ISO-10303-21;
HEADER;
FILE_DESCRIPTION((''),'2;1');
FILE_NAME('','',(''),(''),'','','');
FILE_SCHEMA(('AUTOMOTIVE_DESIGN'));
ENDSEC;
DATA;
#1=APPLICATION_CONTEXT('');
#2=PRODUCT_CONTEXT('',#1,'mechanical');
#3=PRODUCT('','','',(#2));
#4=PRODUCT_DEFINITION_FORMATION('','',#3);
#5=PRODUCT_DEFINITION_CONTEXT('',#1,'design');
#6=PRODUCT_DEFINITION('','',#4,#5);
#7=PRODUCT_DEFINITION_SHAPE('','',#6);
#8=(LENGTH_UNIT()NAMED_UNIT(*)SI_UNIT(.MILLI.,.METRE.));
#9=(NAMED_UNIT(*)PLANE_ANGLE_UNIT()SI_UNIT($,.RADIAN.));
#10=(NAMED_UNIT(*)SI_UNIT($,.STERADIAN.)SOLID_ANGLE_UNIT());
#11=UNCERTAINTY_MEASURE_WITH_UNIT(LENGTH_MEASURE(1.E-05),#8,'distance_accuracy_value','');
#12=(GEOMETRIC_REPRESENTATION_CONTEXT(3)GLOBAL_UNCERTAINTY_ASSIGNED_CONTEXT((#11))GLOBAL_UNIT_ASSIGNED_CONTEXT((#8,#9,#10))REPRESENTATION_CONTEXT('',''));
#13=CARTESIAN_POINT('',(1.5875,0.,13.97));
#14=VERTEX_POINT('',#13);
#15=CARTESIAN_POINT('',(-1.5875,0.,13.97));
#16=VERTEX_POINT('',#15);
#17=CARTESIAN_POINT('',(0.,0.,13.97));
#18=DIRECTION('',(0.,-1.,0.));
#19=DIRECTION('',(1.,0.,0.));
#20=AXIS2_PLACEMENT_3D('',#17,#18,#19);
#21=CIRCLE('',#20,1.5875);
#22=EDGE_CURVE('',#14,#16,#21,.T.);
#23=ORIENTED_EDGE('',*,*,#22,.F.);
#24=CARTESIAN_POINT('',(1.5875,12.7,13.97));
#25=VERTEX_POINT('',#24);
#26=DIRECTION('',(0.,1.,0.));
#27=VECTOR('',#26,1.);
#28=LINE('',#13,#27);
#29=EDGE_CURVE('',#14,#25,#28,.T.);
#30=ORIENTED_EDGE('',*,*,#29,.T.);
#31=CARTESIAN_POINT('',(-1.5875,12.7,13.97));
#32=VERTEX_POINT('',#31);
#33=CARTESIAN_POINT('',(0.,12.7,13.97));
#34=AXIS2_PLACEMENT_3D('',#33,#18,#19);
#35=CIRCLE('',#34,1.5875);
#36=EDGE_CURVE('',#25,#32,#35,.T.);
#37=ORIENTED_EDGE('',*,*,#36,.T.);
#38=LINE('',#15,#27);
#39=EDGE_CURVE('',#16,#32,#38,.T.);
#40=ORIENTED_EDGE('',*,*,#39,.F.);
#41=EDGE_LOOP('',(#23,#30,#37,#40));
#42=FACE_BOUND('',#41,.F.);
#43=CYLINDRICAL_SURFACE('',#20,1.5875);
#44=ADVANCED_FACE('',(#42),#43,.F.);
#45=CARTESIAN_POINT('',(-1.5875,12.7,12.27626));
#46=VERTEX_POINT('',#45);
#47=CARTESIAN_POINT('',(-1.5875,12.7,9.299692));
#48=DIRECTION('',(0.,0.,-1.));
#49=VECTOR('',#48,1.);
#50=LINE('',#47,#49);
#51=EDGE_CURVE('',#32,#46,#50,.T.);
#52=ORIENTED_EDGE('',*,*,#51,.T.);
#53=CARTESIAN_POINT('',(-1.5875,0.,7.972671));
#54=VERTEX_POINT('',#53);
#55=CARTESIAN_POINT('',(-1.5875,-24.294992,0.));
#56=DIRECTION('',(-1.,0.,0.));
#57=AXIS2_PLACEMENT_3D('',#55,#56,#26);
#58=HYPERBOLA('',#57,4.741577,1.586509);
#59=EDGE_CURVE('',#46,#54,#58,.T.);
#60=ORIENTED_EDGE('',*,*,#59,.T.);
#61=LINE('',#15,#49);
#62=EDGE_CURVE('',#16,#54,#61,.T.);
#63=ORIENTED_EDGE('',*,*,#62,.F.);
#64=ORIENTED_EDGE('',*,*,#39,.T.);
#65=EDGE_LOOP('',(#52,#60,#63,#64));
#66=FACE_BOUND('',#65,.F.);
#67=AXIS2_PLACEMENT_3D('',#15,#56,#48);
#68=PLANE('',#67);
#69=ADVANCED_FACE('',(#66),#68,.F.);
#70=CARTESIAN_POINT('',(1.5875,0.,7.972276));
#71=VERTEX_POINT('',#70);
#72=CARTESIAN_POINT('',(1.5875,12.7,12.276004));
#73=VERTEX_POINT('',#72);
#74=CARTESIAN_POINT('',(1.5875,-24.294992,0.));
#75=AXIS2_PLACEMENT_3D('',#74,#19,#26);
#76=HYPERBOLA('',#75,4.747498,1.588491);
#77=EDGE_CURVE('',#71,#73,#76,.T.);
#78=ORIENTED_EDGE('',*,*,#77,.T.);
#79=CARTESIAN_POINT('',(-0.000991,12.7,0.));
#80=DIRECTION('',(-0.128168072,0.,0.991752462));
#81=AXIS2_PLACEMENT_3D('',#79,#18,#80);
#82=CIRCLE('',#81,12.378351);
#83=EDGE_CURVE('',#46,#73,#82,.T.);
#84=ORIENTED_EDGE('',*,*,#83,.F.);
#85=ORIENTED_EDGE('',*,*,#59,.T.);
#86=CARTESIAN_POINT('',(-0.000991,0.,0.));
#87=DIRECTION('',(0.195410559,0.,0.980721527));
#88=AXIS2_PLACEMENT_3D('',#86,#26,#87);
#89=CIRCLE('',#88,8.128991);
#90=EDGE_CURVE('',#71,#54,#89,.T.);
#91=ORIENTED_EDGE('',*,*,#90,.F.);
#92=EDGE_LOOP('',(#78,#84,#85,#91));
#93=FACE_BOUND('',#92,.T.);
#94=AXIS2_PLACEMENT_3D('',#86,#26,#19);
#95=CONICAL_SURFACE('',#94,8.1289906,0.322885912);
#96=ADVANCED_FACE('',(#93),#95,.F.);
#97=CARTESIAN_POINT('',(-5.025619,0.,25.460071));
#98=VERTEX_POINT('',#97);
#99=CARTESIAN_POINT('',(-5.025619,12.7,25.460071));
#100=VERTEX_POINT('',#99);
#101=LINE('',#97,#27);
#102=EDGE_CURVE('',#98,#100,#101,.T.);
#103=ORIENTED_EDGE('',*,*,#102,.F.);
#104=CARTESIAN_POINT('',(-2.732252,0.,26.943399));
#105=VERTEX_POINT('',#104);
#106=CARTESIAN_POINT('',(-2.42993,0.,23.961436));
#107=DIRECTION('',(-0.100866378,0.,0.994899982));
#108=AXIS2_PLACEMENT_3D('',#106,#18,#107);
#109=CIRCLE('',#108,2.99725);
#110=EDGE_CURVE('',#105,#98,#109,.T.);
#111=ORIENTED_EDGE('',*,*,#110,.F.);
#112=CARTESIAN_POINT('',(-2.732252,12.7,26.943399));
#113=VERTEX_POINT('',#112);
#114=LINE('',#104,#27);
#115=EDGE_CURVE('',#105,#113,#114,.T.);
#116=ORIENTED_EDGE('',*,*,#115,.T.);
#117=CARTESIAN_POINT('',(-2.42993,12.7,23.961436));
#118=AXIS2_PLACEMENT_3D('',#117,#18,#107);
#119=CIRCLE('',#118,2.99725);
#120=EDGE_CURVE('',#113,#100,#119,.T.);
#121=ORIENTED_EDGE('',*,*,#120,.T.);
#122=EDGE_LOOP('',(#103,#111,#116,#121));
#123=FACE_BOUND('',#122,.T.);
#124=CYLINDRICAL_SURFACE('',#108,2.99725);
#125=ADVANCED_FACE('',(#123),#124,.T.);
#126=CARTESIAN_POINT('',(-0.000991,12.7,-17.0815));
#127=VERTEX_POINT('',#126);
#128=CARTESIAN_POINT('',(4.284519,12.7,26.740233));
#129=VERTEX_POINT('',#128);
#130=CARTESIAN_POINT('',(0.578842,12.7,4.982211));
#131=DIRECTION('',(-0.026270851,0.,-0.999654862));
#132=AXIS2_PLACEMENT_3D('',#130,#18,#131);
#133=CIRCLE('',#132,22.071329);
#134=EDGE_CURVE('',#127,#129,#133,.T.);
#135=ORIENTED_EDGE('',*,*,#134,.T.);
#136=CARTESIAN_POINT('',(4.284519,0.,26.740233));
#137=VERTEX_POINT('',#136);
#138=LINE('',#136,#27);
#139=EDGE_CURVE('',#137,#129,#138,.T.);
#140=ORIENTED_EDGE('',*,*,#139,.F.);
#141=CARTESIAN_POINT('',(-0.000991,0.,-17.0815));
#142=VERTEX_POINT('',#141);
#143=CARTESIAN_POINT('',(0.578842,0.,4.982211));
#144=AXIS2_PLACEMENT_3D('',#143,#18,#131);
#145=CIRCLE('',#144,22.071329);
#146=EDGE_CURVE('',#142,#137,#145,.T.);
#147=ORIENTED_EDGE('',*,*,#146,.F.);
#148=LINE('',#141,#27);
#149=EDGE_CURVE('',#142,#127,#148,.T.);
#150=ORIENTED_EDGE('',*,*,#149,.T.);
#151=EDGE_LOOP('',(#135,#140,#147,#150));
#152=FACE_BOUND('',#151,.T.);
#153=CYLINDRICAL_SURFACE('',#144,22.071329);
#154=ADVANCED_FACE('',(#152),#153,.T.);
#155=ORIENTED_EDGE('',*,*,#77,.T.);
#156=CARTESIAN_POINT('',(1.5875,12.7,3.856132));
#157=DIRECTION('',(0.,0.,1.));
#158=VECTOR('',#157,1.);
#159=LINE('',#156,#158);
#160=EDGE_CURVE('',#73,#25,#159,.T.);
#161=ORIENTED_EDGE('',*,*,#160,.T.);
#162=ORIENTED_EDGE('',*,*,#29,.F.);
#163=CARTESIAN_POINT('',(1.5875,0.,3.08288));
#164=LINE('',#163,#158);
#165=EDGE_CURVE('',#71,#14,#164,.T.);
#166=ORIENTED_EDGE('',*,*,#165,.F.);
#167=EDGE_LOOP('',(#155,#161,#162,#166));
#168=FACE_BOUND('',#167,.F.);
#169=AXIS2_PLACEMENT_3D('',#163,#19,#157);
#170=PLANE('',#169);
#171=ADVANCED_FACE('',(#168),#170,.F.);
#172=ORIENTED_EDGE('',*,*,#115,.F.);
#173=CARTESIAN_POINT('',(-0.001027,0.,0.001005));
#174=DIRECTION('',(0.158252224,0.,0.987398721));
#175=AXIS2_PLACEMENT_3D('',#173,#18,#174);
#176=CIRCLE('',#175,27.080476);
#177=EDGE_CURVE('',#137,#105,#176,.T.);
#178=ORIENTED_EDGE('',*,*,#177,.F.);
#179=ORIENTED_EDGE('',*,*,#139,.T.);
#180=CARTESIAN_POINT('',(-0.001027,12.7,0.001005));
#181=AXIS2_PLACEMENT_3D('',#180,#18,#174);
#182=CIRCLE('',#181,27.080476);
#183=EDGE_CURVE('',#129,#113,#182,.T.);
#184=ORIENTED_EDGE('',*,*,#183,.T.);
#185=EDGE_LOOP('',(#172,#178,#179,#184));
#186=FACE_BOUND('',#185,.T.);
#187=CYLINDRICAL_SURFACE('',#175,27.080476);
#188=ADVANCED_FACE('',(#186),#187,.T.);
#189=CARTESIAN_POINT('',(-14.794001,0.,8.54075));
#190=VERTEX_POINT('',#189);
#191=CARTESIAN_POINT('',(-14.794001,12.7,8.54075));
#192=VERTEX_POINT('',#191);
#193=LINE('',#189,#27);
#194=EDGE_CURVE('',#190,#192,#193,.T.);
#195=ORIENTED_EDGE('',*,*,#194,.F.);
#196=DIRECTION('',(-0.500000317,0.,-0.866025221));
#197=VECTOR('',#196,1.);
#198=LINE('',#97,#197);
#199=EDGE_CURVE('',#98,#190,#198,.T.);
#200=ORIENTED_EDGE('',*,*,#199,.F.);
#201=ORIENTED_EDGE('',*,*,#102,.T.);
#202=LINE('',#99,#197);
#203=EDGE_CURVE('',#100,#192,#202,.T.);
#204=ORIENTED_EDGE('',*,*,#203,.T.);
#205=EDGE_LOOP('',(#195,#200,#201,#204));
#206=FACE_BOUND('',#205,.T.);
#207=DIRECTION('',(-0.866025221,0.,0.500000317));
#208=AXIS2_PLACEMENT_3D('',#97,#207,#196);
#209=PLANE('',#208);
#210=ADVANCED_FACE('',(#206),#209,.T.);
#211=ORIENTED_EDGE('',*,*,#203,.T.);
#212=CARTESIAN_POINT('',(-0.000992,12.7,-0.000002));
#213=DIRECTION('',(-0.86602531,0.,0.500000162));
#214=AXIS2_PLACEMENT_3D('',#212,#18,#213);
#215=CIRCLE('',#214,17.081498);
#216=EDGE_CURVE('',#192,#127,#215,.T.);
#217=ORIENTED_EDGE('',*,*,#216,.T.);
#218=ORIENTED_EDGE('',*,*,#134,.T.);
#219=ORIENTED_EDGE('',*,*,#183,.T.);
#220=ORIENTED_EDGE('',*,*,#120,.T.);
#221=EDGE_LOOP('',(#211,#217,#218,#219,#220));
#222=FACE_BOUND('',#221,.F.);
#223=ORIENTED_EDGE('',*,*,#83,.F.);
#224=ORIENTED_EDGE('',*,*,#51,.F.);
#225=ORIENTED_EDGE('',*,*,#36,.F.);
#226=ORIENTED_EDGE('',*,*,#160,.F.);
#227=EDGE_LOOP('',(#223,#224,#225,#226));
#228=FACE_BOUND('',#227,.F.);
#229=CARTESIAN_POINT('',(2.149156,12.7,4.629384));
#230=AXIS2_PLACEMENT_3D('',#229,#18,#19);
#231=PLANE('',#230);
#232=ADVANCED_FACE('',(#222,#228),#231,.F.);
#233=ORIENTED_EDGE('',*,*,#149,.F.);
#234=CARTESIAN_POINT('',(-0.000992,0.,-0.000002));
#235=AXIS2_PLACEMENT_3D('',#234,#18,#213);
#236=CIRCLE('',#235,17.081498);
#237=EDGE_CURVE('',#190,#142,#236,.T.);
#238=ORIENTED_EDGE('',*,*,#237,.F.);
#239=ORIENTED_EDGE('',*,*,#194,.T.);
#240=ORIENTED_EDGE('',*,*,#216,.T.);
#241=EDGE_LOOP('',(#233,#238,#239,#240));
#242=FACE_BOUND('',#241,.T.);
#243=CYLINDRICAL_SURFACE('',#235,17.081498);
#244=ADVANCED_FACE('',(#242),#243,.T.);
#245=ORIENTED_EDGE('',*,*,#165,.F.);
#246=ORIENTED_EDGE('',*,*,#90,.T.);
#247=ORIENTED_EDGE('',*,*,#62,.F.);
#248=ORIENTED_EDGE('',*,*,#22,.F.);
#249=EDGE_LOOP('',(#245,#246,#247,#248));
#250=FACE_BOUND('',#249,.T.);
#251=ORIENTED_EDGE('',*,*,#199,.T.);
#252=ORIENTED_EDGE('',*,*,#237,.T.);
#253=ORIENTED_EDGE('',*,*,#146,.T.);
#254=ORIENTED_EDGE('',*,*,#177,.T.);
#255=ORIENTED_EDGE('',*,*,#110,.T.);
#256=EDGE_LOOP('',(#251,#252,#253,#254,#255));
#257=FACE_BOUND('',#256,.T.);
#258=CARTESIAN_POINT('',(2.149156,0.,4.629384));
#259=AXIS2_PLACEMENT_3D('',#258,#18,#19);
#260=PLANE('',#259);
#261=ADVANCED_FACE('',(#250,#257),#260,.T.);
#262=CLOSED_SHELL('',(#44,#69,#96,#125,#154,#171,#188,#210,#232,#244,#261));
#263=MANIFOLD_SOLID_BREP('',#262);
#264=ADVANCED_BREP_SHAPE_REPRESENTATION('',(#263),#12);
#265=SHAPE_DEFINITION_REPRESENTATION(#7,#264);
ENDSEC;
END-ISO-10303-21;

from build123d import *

# Parameters (mm, degrees)
F0_R     = 8.128
F1_DEPTH = 12.7
F5_DEPTH = 12.701


# Not quite as in the source:
# - ends of sketch curves that miss each other by under 0.0002 mm in the source are joined


with BuildPart() as f1:
    # F0 (on Front) → F1 (new body)
    with BuildSketch(Plane.XZ):
        with BuildLine():
            Line((-5.0256186, 25.460071), (-14.7940014, 8.54075))
            ThreePointArc((-14.7940014, 8.54075), (-14.7940038016, -8.5407495378), (-0.0009906, -17.0815))
            ThreePointArc((-0.0009906, -17.0815), (22.5453798959, 2.8340109101), (4.2845187845, 26.7402328229))
            ThreePointArc((4.2845187845, 26.7402328229), (0.7827449758, 27.0701370063), (-2.7322519698, 26.9433993832))
            ThreePointArc((-2.7322519698, 26.9433993832), (-4.0577155326, 26.4781440431), (-5.0256186, 25.460071))
        make_face()
        with Locations((-0.0009906, 0)):
            Circle(F0_R, mode=Mode.SUBTRACT)
    extrude(amount=-F1_DEPTH)

    # F2 (on Top) → F3 (revolve, cut)
    with BuildSketch(Plane.XY):
        Polygon((1.778, 0), (8.128, 0), (12.4623477688, 12.954), (8.128, 12.954), (1.778, 12.954), align=None)
    revolve(axis=Axis((-0.0009906, 0, 0), (0, -1, 0)), mode=Mode.SUBTRACT)

    # F4 (on face) → F5 (cut, through all)
    with BuildSketch(Plane.XZ):
        with BuildLine():
            Line((-1.5875, 13.97), (-1.5875, 3.0828800518))
            Line((-1.5875, 3.0828800518), (1.5875, 3.0828800518))
            Line((1.5875, 3.0828800518), (1.5875, 13.97))
            ThreePointArc((1.5875, 13.97), (0, 15.5575), (-1.5875, 13.97))
        make_face()
    extrude(amount=-F5_DEPTH, mode=Mode.SUBTRACT)


solid = f1.part
